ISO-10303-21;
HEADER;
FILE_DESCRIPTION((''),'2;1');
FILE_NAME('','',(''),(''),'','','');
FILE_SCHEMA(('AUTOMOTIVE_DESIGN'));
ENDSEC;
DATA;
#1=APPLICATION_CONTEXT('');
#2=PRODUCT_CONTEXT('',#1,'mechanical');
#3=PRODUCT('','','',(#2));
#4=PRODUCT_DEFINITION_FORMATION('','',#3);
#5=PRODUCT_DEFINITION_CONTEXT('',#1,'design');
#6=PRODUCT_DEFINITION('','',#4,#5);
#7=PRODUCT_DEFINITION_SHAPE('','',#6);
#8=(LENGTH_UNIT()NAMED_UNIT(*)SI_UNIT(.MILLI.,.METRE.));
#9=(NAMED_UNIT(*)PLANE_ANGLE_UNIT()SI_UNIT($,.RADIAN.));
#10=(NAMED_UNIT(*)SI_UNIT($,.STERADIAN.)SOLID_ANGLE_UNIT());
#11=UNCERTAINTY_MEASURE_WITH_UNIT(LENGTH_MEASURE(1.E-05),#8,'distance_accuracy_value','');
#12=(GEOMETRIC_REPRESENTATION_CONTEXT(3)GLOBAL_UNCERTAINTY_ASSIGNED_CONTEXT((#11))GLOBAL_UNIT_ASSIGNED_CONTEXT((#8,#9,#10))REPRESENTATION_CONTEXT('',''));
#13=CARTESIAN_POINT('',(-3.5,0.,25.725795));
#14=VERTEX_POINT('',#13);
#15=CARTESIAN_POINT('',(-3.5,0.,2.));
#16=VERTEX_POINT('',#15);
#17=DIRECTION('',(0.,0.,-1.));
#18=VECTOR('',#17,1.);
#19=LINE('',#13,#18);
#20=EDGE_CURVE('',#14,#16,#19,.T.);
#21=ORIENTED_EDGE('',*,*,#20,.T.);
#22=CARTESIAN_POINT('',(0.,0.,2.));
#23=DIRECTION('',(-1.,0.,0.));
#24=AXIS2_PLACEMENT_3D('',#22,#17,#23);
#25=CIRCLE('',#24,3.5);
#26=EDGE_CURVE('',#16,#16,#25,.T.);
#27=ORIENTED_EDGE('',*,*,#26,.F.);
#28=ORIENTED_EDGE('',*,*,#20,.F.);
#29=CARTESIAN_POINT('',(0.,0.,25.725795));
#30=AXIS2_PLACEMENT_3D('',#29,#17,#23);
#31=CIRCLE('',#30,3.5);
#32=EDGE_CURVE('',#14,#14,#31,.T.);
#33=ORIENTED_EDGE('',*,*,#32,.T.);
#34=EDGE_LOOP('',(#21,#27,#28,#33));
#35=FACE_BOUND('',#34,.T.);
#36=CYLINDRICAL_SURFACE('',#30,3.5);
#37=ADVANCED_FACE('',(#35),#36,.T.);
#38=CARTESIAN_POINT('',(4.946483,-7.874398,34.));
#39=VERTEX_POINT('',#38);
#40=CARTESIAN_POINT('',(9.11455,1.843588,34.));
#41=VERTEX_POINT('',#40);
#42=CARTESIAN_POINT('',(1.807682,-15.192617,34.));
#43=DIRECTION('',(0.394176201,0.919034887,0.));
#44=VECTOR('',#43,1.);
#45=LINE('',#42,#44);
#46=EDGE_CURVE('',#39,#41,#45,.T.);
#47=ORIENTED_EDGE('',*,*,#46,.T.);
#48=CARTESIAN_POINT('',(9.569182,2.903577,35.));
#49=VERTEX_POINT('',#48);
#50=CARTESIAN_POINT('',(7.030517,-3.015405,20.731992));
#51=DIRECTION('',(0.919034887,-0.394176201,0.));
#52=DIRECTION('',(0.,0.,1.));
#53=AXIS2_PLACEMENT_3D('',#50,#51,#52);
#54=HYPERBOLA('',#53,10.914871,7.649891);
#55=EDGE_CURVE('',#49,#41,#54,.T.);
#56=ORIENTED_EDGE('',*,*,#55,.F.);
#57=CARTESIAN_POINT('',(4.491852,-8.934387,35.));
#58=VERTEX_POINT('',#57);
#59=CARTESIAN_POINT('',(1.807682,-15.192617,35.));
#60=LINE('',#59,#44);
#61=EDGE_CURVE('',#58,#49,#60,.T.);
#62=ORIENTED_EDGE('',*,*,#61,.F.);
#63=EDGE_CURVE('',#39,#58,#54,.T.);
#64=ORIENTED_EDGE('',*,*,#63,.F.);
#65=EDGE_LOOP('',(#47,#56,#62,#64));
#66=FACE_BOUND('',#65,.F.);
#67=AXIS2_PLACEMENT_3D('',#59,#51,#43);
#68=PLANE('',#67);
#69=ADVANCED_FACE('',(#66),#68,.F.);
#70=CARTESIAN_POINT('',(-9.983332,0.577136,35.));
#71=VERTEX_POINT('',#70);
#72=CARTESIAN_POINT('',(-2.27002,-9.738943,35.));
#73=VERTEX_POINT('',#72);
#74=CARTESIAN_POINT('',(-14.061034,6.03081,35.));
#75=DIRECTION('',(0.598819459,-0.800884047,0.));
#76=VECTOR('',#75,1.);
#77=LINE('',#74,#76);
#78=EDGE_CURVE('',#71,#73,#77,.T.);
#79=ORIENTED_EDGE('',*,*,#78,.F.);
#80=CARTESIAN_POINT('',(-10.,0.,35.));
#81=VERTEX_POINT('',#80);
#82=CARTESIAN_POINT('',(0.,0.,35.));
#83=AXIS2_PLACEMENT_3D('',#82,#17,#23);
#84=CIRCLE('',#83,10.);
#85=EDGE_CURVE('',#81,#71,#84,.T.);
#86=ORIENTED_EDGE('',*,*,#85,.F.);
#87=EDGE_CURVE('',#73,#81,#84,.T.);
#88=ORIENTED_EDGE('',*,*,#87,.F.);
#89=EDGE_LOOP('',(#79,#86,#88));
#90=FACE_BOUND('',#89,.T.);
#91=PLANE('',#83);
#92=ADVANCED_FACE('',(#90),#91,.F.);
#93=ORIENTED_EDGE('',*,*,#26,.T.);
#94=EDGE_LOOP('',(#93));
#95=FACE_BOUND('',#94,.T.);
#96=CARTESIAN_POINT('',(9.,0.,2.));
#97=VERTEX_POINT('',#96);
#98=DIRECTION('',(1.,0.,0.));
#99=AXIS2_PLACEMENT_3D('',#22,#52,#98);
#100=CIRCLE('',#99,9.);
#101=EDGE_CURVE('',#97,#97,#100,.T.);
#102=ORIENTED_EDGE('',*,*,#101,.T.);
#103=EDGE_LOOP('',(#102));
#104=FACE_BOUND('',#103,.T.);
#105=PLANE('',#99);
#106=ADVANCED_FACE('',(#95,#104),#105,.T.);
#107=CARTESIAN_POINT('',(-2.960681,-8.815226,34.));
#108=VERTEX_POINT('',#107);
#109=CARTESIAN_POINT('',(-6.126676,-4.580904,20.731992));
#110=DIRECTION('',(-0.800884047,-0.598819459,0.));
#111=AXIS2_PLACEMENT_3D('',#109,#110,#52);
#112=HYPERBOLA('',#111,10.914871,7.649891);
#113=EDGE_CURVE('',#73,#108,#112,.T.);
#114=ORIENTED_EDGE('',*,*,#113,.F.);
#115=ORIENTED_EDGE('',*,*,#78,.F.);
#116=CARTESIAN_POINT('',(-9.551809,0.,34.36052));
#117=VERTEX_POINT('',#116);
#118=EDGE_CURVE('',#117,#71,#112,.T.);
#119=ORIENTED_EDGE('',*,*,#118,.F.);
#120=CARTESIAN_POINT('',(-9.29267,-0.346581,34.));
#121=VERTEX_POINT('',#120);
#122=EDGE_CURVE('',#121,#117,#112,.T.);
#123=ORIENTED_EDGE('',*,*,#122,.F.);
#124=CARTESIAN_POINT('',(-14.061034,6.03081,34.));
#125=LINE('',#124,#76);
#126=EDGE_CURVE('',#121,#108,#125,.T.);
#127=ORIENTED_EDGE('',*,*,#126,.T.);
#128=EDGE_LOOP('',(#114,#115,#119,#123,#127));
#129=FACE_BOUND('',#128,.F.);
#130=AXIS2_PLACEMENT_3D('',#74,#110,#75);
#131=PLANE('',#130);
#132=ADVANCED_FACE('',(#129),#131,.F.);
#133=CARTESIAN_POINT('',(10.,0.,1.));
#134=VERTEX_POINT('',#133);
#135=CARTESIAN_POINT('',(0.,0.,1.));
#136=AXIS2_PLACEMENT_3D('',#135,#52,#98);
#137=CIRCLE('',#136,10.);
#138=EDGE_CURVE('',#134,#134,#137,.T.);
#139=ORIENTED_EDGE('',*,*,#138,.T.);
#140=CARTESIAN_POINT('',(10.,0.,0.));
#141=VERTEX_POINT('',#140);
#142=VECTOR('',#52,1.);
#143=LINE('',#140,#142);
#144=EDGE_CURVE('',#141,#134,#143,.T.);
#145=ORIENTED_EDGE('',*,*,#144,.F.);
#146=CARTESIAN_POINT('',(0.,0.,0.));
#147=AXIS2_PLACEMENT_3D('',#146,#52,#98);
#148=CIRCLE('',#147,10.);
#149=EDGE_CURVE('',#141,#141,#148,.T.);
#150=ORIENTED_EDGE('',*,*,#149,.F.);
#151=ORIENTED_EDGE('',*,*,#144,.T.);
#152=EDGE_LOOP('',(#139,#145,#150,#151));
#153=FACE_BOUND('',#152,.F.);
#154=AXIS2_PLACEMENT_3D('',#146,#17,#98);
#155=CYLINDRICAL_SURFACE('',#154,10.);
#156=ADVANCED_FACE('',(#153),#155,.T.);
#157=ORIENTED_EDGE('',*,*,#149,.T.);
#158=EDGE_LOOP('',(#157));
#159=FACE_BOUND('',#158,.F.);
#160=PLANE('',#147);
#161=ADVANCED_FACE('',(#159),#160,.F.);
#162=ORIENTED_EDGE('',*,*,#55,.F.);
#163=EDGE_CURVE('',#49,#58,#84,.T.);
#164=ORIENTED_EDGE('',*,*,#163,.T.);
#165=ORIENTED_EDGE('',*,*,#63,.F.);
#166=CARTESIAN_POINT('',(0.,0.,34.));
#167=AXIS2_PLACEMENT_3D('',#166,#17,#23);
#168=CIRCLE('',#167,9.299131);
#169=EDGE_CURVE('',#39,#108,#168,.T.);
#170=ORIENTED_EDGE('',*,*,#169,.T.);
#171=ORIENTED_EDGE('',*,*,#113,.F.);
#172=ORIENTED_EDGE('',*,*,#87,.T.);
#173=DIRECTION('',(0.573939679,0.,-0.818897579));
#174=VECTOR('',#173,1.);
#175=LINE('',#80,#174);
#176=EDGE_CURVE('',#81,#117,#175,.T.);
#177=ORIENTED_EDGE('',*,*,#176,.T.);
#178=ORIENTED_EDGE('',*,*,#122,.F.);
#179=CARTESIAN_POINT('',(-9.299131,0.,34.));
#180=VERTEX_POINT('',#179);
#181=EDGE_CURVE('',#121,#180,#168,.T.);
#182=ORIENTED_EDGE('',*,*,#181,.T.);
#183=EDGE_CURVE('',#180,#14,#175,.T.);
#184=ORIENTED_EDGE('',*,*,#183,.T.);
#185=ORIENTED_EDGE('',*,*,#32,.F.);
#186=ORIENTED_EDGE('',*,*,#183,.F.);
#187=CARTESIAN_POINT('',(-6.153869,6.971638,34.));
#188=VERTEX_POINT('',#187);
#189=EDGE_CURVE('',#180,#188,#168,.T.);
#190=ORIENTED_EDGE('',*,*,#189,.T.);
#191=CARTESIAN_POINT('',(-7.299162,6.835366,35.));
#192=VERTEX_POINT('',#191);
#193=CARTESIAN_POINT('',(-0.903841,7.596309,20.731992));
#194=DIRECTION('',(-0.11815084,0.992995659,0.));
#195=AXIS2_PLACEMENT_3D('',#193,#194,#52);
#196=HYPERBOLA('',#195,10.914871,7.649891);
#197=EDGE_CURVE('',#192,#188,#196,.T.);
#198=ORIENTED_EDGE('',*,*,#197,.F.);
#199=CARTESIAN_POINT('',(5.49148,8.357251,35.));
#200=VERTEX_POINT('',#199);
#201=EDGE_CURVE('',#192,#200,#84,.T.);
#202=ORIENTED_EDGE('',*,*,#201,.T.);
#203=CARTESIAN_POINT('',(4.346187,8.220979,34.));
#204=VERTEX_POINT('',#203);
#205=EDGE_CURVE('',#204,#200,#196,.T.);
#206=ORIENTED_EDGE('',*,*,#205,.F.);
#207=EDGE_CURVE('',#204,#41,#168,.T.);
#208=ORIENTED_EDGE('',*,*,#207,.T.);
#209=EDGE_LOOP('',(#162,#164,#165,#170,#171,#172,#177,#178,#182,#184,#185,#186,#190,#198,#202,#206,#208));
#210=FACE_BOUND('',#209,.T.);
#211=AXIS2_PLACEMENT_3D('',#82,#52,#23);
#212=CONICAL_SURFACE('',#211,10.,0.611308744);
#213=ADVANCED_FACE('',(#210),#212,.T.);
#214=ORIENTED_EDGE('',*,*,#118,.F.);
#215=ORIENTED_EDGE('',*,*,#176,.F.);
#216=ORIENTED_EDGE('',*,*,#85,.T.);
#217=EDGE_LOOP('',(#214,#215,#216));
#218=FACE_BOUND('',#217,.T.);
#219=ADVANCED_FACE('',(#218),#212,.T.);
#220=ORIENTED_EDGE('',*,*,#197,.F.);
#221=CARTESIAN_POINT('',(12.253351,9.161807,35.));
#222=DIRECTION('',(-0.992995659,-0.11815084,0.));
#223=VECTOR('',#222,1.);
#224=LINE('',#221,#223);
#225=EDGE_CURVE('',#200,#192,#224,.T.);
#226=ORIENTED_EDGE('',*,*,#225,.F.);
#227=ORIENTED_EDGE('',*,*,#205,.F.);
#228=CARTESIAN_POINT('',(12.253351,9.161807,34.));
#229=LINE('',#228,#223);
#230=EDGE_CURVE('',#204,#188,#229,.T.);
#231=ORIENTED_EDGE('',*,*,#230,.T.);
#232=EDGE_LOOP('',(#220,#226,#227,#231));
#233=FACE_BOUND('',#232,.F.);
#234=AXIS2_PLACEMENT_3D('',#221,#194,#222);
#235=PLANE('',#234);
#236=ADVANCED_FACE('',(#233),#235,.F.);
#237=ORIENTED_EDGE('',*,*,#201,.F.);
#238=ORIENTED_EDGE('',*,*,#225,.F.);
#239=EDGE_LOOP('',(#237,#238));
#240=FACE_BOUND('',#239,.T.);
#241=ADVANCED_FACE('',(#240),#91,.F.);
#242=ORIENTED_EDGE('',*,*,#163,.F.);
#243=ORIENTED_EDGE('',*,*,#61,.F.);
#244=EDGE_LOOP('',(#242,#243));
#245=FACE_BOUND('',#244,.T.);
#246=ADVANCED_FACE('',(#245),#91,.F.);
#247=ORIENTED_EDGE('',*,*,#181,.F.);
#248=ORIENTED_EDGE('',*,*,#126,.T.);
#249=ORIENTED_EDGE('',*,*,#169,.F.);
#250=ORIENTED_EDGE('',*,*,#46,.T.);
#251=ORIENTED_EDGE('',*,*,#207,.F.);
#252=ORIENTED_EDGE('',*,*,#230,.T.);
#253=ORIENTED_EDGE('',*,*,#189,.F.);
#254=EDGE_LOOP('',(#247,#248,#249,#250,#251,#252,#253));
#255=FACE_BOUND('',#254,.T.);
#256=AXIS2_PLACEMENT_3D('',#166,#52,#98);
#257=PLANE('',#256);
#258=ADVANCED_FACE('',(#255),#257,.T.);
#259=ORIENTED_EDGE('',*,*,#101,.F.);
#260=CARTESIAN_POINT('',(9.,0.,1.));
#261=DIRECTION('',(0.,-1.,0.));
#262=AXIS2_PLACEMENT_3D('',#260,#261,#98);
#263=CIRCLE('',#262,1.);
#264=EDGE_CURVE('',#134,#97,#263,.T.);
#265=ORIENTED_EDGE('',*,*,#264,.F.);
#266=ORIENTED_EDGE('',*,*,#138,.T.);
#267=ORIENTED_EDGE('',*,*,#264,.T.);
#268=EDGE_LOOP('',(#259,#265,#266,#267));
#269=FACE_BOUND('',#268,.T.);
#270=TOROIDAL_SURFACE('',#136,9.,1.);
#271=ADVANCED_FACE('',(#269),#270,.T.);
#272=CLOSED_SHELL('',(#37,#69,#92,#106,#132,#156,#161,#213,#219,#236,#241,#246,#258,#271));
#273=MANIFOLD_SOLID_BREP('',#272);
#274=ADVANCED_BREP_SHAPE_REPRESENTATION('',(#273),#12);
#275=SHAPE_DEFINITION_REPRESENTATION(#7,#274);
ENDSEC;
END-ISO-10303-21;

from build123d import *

# Parameters (mm, degrees)
F0_R     = 10
F1_DEPTH = 2
F3_R     = 1
F6_DEPTH = 1


with BuildPart() as f1:
    # F0 (on Top) → F1 (new body)
    with BuildSketch(Plane.XY):
        Circle(F0_R)
    extrude(amount=F1_DEPTH)

    # F3
    f3_edges = [f1.edges().sort_by_distance(p)[0] for p in [
        (-10, 0, 2),
    ]]
    fillet(f3_edges, radius=F3_R)

    # F2 (on Front) → F4 (revolve)
    with BuildSketch(Plane.XZ):
        Polygon((0, 35), (-10, 35), (-3.5, 25.7257949561), (-3.5, 2), (0, 2), align=None)
    revolve(axis=Axis((0, 0, 18.5), (0, 0, -1)))

    # F5 (on face) → F6 (cut)
    with BuildSketch(Plane.XY.offset(35)):
        Polygon((1.8076821121, -15.1926172437), (12.253351427, 9.1618072529), (-14.0610335391, 6.0308099908), align=None)
    extrude(amount=-F6_DEPTH, mode=Mode.SUBTRACT)


solid = f1.part
